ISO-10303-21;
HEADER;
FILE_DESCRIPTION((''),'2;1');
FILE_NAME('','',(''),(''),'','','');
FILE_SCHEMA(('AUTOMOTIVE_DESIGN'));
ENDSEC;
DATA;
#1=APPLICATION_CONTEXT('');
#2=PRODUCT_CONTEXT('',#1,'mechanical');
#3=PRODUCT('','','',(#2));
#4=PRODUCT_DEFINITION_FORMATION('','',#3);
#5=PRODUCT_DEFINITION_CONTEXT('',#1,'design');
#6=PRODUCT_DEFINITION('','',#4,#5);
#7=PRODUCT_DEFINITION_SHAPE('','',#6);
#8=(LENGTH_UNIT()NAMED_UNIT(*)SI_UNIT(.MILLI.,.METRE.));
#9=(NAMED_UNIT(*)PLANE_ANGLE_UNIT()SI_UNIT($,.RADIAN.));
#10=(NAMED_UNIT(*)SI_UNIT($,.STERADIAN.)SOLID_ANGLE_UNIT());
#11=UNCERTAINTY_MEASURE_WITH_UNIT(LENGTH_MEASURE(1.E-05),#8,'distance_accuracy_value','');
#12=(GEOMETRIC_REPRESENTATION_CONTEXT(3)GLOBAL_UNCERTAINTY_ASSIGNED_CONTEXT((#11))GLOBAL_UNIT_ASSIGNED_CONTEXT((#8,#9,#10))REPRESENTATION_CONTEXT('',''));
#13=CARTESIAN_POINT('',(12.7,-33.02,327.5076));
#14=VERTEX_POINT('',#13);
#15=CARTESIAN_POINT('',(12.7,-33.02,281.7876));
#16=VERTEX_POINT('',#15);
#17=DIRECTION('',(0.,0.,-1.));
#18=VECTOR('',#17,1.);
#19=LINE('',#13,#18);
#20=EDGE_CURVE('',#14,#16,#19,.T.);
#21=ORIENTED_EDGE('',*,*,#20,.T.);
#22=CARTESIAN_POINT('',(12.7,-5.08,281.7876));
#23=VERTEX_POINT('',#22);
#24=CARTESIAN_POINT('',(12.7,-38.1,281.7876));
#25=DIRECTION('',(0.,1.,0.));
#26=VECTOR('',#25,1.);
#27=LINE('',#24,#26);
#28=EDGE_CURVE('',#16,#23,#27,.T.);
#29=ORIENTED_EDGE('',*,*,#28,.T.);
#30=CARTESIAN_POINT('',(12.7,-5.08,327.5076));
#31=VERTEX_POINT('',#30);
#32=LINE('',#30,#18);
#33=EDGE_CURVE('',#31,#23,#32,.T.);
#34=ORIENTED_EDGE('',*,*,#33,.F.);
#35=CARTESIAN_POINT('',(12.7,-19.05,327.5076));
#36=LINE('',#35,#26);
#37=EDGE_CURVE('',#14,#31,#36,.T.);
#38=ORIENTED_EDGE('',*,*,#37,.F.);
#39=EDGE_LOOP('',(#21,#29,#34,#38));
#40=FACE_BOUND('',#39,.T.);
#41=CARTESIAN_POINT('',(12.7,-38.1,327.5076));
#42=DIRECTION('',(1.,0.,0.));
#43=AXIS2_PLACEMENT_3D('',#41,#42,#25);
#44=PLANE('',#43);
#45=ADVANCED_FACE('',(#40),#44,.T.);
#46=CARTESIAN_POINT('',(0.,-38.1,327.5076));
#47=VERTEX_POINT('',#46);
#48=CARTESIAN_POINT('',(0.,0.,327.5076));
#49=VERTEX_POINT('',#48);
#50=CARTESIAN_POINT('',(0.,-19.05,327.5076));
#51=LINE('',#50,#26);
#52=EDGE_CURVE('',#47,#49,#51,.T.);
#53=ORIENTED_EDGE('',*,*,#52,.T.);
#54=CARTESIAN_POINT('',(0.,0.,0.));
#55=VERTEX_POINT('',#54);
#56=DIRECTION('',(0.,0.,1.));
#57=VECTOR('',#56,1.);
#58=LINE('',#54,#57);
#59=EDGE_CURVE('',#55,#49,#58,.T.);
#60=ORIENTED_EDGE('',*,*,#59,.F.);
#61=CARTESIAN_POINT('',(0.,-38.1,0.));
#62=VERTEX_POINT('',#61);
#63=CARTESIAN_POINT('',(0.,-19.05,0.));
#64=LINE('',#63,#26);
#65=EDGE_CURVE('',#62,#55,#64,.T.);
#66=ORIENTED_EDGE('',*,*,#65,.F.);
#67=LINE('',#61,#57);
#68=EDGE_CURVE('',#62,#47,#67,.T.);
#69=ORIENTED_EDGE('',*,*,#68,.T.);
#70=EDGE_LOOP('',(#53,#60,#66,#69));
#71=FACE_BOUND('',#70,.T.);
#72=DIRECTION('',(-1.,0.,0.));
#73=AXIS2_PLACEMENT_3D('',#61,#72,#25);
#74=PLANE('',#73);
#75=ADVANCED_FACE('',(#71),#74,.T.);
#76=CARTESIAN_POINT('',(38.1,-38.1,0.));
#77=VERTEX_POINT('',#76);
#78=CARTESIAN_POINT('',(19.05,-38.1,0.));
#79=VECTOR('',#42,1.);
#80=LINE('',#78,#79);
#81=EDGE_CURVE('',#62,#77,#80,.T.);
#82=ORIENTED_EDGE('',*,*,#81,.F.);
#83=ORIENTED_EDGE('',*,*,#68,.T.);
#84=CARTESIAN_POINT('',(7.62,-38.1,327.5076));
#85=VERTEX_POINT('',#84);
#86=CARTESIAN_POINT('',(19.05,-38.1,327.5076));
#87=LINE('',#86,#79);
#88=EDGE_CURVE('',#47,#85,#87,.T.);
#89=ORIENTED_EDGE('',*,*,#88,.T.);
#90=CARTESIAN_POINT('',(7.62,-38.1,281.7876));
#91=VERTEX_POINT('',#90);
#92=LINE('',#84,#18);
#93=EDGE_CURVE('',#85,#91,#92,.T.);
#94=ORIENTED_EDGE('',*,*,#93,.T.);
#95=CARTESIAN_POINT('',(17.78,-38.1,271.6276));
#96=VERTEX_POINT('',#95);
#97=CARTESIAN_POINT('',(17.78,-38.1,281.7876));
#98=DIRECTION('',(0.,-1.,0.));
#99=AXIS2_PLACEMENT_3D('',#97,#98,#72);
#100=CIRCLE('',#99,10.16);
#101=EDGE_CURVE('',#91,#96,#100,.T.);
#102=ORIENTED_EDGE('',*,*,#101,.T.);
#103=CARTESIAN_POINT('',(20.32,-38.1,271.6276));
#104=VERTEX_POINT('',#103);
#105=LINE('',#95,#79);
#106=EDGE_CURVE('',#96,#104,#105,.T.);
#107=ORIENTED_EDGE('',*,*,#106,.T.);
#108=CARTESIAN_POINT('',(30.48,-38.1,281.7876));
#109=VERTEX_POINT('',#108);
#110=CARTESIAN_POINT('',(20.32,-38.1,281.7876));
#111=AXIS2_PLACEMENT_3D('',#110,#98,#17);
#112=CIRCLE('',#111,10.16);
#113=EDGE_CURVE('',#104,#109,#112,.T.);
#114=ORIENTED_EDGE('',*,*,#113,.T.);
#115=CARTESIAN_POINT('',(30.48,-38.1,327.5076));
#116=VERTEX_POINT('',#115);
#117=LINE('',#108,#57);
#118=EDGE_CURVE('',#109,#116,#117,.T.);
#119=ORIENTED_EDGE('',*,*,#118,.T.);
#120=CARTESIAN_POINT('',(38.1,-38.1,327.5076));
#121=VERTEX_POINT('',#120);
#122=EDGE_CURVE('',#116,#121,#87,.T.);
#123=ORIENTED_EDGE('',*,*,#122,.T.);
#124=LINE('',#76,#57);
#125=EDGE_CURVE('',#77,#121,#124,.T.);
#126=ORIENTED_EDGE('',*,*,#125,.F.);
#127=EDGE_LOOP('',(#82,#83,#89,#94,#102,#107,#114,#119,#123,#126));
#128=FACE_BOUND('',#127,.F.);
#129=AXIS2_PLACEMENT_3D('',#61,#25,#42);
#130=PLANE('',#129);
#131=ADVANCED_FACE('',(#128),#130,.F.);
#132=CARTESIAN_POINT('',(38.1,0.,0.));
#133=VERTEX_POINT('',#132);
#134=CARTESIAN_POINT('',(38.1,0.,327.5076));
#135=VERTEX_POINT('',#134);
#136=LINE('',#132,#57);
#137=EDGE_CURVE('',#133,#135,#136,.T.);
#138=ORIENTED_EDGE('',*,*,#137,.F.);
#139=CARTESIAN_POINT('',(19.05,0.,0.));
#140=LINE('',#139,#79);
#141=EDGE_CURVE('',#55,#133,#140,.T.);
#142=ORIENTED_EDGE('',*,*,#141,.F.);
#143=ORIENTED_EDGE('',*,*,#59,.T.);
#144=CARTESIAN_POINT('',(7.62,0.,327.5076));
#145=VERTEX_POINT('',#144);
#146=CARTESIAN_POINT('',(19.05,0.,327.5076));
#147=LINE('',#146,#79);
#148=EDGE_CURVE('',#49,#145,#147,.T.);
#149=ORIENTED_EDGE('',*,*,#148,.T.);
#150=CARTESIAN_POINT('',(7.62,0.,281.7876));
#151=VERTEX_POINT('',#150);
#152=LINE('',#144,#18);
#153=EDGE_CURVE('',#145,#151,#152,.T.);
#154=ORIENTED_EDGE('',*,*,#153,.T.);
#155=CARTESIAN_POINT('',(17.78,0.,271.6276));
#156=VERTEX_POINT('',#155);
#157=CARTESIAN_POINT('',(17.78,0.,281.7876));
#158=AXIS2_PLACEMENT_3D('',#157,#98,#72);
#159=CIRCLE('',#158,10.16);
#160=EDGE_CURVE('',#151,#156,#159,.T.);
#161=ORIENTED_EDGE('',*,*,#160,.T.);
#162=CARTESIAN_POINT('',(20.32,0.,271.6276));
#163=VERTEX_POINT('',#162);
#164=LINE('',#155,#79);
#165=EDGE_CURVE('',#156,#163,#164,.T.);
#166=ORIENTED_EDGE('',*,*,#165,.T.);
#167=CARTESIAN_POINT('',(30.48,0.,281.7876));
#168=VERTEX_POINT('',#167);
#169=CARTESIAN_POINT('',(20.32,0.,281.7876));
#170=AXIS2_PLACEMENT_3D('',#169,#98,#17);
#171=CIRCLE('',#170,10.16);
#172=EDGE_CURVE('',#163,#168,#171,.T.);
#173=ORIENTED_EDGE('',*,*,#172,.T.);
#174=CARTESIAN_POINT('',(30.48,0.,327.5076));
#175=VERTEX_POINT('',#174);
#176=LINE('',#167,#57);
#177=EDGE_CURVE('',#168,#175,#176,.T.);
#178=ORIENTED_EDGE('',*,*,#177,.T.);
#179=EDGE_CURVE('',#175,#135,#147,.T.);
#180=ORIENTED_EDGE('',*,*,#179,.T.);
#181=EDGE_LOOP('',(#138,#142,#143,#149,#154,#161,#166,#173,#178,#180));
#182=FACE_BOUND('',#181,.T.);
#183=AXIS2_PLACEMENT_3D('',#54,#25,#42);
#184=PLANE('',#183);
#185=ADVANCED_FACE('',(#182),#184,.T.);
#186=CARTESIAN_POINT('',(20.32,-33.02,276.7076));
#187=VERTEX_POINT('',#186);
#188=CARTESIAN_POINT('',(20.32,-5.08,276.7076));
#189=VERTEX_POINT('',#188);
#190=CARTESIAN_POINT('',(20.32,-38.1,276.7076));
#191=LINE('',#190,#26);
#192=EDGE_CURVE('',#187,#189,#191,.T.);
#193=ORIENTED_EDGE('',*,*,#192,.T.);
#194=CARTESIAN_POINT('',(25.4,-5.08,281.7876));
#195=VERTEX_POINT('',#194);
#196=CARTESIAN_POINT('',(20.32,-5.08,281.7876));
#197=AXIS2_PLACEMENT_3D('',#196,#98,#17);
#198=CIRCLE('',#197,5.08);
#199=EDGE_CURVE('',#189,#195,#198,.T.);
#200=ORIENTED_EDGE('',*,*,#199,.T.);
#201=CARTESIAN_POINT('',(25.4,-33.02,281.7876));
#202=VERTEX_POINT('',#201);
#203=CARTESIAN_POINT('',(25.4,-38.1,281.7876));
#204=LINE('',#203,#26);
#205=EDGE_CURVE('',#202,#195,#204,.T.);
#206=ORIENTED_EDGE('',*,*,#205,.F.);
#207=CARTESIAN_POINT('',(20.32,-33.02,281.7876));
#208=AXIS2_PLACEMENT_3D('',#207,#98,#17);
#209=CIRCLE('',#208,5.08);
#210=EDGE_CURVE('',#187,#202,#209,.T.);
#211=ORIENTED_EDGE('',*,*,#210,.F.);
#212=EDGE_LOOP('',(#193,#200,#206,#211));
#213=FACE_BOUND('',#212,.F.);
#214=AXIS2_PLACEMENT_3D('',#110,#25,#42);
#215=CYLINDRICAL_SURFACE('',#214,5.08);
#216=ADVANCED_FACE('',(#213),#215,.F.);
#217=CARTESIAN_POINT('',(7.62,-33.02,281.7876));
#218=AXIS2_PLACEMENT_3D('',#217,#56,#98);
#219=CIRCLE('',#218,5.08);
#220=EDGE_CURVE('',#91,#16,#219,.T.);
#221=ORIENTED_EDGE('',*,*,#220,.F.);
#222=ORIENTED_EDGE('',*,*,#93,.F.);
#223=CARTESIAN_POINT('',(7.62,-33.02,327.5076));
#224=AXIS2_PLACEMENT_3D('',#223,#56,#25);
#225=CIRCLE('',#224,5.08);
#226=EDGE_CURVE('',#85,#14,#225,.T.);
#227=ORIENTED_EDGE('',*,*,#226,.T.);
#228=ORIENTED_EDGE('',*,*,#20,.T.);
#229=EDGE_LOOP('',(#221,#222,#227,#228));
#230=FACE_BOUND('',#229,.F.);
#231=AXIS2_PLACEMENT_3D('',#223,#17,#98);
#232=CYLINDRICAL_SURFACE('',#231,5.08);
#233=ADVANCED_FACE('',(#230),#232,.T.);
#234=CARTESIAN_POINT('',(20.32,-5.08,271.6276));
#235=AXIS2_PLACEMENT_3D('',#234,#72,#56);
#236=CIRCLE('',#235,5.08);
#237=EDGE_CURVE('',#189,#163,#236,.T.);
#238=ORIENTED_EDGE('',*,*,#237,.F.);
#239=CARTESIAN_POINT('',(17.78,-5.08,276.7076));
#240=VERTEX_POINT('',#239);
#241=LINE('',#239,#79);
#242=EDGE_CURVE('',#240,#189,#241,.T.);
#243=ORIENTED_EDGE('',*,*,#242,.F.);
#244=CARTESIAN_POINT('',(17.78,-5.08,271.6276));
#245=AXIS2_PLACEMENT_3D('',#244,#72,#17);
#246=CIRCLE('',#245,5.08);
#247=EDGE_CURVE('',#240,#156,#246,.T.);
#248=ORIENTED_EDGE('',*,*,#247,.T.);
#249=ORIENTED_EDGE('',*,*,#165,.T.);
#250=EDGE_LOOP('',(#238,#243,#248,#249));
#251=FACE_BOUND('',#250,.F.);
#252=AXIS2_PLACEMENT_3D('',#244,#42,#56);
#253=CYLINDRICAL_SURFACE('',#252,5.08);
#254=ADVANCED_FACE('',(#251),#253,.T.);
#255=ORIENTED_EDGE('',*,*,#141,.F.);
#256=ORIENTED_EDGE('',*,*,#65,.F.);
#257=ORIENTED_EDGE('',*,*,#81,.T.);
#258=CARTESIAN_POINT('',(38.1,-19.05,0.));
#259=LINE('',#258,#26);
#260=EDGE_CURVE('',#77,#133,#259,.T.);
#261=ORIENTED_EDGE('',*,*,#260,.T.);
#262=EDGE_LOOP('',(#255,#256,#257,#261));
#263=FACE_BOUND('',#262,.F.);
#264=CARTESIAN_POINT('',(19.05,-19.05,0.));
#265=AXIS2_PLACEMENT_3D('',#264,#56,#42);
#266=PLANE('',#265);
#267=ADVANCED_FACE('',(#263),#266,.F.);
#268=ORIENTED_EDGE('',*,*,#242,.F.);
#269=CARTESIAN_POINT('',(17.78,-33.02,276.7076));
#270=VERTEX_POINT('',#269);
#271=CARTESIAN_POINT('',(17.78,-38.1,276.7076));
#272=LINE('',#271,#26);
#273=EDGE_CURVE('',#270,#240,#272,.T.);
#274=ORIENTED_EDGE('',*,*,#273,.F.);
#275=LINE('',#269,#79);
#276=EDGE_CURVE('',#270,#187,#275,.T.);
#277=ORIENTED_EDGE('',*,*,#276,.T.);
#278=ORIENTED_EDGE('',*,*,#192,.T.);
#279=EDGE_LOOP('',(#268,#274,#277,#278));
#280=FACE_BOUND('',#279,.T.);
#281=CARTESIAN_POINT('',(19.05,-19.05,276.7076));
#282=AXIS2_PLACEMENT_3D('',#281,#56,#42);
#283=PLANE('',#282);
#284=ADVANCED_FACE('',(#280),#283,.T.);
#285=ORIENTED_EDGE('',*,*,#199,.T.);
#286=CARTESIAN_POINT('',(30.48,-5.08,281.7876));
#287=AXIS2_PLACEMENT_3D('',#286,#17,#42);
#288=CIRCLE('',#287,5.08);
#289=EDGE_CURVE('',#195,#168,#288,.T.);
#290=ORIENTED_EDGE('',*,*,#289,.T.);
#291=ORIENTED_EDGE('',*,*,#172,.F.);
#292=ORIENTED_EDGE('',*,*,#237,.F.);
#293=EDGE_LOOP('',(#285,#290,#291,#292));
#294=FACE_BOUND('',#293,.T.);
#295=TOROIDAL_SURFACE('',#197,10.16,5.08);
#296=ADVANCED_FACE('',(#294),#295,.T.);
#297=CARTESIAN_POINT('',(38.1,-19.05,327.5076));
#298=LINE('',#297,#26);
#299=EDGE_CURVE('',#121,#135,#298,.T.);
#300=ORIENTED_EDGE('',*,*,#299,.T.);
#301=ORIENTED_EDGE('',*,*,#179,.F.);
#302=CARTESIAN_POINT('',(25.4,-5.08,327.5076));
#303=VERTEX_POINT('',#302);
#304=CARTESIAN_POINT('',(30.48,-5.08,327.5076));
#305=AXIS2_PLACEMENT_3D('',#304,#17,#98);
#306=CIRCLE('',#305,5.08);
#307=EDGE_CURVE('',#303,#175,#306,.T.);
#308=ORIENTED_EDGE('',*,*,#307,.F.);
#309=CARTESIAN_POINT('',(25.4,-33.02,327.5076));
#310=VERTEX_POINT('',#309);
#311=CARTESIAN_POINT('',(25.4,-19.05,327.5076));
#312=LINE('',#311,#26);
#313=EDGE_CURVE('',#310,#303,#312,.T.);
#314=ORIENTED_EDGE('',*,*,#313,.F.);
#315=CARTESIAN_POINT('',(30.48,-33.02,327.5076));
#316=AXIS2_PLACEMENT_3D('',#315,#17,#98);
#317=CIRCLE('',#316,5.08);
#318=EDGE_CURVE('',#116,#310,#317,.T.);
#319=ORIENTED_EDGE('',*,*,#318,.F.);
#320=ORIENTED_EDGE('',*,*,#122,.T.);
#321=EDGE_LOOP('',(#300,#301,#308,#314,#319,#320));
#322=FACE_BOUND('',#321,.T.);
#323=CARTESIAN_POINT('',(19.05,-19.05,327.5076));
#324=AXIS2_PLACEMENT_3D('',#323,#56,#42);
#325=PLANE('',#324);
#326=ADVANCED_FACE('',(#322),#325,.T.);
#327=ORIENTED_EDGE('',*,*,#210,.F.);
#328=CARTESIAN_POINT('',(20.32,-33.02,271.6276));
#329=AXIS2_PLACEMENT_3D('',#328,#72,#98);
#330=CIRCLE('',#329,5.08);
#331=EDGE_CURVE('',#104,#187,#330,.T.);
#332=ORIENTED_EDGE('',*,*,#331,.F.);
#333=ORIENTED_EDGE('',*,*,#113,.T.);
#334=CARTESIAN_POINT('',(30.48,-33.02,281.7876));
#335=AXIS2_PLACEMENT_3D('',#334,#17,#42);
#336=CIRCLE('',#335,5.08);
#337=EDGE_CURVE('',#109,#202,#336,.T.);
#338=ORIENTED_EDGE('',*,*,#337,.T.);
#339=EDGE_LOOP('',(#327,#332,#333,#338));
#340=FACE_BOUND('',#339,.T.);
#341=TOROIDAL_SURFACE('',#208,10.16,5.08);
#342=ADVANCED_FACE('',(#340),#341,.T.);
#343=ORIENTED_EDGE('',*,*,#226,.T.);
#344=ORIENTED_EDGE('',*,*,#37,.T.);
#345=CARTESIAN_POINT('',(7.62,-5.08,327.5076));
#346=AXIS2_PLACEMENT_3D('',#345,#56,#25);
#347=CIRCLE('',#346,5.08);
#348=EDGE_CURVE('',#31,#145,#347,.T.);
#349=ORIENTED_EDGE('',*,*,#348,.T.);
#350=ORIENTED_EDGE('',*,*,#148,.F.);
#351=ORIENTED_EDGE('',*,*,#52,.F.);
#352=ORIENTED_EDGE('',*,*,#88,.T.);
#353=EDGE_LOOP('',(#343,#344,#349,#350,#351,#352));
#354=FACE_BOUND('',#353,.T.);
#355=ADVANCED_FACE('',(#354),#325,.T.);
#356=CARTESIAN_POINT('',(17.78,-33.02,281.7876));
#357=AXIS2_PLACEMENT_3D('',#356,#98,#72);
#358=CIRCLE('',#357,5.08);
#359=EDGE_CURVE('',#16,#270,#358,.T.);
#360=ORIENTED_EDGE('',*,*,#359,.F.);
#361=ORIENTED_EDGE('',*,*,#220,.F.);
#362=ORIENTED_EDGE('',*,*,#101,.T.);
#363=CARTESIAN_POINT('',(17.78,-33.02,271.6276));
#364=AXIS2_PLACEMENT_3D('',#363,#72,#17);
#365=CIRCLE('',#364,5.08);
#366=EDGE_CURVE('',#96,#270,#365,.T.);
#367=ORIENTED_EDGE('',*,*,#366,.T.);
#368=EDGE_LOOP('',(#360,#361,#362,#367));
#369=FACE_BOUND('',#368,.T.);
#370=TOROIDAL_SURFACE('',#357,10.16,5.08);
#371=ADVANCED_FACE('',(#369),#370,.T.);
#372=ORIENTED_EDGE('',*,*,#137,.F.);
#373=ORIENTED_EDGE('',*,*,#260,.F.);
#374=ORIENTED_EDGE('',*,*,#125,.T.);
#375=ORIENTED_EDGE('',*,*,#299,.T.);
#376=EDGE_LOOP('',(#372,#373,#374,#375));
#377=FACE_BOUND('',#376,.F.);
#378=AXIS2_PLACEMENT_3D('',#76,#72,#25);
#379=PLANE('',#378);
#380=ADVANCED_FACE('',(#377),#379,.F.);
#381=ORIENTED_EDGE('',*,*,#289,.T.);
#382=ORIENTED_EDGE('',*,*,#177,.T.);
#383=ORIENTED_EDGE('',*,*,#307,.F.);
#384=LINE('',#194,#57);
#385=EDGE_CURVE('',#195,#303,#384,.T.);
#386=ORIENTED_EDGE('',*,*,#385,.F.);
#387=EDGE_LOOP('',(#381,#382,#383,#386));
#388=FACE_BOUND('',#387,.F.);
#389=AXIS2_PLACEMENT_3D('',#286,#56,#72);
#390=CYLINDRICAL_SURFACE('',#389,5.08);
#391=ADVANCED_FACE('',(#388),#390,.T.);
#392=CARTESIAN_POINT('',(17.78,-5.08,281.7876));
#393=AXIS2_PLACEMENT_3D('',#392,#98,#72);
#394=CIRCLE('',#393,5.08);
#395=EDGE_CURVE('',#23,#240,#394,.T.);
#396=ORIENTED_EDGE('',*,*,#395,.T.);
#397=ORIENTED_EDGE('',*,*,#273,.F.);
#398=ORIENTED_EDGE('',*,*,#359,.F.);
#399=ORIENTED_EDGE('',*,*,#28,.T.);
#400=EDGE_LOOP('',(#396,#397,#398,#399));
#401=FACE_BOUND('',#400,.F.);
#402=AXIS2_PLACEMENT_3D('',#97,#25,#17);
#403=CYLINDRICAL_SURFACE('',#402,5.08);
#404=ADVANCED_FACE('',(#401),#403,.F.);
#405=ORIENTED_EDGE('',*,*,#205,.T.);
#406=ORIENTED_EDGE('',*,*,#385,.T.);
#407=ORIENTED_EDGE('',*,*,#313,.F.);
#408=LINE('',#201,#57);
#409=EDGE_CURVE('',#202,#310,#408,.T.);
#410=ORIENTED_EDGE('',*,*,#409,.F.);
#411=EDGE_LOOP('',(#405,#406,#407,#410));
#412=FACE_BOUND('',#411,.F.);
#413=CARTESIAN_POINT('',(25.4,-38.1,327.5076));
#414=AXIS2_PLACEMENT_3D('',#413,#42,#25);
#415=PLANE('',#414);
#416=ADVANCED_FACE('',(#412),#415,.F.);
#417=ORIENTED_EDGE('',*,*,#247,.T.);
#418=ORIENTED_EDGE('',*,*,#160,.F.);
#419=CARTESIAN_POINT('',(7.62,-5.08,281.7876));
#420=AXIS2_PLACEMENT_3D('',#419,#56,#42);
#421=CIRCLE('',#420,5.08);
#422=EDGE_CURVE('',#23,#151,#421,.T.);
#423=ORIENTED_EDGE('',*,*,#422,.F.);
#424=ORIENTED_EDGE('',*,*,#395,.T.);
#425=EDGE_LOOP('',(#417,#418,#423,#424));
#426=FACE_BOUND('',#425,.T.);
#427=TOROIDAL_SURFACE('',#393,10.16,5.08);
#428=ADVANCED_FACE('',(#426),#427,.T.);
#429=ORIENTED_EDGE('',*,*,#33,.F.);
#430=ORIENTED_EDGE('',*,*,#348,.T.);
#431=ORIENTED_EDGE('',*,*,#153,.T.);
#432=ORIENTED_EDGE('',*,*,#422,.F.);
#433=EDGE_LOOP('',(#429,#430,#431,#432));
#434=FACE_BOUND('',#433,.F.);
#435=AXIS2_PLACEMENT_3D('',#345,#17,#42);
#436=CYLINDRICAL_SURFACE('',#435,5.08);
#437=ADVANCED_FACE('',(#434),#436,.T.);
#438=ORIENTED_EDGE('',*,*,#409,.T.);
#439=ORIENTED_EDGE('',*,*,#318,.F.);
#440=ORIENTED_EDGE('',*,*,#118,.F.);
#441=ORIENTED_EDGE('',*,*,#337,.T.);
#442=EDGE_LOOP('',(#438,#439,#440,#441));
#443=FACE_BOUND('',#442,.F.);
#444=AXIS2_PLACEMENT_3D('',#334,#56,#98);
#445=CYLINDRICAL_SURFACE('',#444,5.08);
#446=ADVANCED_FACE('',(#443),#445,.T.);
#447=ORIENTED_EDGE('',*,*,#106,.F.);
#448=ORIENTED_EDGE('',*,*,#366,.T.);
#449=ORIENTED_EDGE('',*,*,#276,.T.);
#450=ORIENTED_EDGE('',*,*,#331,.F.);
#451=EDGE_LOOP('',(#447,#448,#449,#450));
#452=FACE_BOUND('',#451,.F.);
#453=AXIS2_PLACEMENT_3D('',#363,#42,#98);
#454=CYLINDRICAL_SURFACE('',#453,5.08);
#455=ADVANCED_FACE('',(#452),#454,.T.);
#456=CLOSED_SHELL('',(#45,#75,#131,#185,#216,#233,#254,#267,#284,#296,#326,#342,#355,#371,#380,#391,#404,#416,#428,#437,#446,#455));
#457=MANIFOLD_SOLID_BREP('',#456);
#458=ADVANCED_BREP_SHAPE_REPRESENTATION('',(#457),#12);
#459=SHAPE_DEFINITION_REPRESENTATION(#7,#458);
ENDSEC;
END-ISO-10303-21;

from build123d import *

# Parameters (mm, degrees)
F0_W     = 38.1
F0_H     = 38.1
F1_DEPTH = 327.5076
F2_W     = 12.7
F2_H     = 38.1
F3_DEPTH = 50.8
F4_F1_R  = 5.08
F4_F2_R  = 5.08


with BuildPart() as f1:
    # F0 (on Top) → F1 (new body)
    with BuildSketch(Plane.XY):
        with Locations((19.05, -19.05)):
            Rectangle(F0_W, F0_H)
    extrude(amount=F1_DEPTH)

    # F2 (on face) → F3 (cut)
    with BuildSketch(Plane.XY.offset(327.5076)):
        with Locations((19.05, -19.05)):
            Rectangle(F2_W, F2_H)
    extrude(amount=-F3_DEPTH, mode=Mode.SUBTRACT)

    # F4: fillet of radius 5.08 on 4 edges, made by hand

    # F4_f1
    f4_f1_edges = [f1.edges().sort_by_distance(p)[0] for p in [
        (12.7, -19.05, 276.7076),
        (25.4, -19.05, 276.7076),
    ]]
    fillet(f4_f1_edges, radius=F4_F1_R)

    # F4_f2
    f4_f2_edges = [f1.edges().sort_by_distance(p)[0] for p in [
        (19.05, 0, 276.7076),
        (19.05, -38.1, 276.7076),
        (14.1878975516, -38.1, 278.1954975516),
        (23.9121024484, -38.1, 278.1954975516),
        (23.9121024484, 0, 278.1954975516),
        (14.1878975516, 0, 278.1954975516),
    ]]
    fillet(f4_f2_edges, radius=F4_F2_R)


solid = f1.part
